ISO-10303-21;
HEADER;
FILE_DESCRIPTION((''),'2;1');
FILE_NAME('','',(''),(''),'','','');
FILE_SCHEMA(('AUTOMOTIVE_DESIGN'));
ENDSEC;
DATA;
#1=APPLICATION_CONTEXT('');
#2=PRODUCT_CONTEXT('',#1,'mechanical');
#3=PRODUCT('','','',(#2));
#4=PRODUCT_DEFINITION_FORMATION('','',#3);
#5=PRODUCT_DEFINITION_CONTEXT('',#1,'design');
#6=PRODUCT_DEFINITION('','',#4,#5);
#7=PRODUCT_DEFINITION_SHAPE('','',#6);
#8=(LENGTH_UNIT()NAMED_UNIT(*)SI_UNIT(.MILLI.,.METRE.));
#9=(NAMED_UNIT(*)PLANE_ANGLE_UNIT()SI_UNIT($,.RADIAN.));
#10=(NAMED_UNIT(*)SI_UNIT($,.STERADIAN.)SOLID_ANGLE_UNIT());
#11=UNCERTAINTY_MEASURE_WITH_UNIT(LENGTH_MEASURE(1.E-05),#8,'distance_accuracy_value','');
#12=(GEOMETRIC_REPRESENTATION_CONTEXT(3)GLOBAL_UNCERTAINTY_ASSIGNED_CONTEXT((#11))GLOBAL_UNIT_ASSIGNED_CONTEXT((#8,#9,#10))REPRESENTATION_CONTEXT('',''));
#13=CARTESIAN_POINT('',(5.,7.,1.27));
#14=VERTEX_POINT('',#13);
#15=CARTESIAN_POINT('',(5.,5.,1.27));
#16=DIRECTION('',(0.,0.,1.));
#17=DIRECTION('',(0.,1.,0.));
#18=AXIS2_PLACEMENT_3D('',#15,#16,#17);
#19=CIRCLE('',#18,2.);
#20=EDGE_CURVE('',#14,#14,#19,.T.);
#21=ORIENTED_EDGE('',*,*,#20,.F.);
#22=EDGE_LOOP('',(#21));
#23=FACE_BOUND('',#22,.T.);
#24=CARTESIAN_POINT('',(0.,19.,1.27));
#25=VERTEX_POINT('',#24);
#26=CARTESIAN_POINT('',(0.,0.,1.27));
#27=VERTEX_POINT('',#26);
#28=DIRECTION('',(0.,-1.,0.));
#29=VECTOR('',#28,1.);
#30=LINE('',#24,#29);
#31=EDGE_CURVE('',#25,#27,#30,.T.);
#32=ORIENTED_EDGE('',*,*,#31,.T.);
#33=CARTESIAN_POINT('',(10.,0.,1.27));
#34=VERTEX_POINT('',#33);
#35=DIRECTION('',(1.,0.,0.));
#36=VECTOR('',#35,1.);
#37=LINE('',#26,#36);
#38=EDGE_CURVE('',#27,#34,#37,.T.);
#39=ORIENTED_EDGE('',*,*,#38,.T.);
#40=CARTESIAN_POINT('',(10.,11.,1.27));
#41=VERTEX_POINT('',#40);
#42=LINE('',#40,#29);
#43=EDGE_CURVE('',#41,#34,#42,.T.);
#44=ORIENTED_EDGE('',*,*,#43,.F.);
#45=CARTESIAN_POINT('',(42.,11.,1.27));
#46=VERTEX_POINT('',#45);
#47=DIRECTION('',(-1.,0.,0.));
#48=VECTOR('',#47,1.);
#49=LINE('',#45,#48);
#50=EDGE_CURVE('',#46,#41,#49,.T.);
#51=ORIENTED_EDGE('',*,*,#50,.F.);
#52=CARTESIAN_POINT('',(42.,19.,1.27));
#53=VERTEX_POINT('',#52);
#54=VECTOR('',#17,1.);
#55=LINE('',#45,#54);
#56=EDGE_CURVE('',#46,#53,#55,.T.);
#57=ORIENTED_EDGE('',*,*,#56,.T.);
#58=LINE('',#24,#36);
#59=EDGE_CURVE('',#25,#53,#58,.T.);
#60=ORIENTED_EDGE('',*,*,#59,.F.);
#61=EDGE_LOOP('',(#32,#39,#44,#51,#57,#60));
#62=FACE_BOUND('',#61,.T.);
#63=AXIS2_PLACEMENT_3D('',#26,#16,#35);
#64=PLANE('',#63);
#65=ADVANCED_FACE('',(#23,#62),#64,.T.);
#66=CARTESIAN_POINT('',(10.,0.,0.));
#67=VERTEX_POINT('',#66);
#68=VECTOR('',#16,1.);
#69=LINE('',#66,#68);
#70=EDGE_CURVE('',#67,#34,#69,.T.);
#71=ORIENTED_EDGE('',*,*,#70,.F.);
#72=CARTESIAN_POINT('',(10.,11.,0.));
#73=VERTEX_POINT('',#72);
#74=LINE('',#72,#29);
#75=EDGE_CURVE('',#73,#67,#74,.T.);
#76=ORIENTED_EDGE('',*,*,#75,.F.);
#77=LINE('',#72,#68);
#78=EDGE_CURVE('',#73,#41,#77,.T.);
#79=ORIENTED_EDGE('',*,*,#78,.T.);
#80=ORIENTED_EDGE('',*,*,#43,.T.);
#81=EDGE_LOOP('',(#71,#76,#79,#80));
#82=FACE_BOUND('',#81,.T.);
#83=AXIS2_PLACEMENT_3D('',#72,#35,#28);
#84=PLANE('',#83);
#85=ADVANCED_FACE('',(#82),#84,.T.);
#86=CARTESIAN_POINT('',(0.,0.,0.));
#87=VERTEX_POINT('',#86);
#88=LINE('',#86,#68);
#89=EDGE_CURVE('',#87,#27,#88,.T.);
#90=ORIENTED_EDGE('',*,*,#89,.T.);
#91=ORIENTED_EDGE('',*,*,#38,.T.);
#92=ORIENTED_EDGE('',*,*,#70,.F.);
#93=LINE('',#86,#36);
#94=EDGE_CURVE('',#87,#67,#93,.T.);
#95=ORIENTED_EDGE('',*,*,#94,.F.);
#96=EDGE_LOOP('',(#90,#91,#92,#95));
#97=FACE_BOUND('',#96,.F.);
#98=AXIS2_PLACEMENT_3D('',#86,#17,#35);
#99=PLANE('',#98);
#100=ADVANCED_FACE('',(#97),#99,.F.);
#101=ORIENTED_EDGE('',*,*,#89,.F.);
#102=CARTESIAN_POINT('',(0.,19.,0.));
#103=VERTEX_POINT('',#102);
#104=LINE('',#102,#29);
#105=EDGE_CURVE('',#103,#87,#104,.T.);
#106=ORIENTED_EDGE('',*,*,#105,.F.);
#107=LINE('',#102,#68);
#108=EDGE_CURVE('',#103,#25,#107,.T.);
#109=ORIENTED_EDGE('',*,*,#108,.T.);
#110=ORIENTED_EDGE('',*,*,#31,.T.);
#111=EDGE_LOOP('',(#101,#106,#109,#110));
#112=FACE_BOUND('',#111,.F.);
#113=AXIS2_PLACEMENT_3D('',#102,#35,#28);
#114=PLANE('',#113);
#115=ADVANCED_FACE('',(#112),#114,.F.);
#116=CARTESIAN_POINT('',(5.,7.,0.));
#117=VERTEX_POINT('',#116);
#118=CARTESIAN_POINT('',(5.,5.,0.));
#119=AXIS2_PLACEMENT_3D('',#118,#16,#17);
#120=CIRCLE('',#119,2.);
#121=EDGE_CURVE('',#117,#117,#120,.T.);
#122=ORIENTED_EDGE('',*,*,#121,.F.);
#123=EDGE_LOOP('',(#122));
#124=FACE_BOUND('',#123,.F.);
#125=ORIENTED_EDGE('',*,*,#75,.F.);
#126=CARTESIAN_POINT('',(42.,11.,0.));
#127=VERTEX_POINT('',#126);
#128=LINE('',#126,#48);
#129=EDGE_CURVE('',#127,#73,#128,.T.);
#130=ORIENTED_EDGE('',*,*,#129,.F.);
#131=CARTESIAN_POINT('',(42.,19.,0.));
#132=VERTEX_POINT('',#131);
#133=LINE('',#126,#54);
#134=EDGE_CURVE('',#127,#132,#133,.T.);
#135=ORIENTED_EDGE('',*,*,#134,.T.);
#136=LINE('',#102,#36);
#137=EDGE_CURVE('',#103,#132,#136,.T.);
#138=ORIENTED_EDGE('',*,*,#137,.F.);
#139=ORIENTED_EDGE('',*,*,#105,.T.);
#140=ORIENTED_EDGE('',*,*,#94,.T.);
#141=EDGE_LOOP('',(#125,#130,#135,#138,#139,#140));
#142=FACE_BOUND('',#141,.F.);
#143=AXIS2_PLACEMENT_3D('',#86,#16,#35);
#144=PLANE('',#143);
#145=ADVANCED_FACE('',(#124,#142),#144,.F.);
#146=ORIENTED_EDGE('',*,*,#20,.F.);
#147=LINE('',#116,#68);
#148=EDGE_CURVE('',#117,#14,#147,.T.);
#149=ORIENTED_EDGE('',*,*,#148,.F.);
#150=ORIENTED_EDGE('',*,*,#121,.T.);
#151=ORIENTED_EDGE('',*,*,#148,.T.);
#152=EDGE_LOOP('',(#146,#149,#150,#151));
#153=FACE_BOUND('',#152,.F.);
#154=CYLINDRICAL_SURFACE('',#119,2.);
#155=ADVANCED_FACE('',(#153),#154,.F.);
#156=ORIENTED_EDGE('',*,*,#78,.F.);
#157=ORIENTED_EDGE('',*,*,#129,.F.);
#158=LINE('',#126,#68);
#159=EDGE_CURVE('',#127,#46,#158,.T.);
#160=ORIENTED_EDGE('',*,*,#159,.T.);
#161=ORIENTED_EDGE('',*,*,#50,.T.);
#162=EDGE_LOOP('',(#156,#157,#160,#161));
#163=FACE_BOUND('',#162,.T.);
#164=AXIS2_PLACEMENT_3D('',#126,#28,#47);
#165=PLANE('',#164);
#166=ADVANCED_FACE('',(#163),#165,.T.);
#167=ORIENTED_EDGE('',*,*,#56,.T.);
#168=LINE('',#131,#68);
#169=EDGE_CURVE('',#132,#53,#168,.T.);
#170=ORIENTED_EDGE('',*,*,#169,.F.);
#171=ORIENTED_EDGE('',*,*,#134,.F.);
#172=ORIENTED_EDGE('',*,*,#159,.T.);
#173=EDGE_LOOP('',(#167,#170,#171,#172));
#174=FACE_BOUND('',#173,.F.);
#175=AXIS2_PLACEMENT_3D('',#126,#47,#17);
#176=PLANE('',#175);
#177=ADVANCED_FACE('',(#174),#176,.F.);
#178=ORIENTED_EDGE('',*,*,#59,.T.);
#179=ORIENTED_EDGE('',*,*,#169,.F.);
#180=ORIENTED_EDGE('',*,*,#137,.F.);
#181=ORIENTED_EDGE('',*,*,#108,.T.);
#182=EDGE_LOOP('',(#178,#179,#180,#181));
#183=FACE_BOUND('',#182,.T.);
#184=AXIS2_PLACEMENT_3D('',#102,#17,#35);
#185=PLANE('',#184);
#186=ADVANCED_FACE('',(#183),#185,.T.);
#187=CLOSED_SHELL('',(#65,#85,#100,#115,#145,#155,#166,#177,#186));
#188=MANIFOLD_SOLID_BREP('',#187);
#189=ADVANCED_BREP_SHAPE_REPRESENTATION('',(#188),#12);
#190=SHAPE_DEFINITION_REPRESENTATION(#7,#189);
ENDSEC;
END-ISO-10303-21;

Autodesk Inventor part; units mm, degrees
ref_plane "YZ Plane" through (0, 0, 0) normal (1, 0, 0) x (0, 1, 0)
ref_plane "XZ Plane" through (0, 0, 0) normal (0, 1, 0) x (-1, 0, 0)
ref_plane "XY Plane" through (0, 0, 0) normal (0, 0, 1) x (1, 0, 0)
sketch "Sketch1" plane through (0, 0, 0) normal (0, 0, 1) x (1, 0, 0)
  line L0 (0, 0) -> (10, 0)
  line L1 (0, 19) -> (42, 19)
  line L2 (10, 11) -> (10, 0)
  line L3 (42, 11) -> (10, 11)
  line L4 (0, 19) -> (0, 0)
  line L5 (42, 11) -> (42, 19)
extrude "Extrusion1" add sketch "Sketch1" along normal blind 1.27
sketch "Sketch2" plane through (0, 0, 0) normal (0, 0, 1) x (1, 0, 0)
  point P0 (5, 5)
hole "Hole1" at (5, 5, 0) direction (0, 0, 1) diameter 4 depth 1.27
properties part number "Spreader Flag" material "Nylon 6/6"
